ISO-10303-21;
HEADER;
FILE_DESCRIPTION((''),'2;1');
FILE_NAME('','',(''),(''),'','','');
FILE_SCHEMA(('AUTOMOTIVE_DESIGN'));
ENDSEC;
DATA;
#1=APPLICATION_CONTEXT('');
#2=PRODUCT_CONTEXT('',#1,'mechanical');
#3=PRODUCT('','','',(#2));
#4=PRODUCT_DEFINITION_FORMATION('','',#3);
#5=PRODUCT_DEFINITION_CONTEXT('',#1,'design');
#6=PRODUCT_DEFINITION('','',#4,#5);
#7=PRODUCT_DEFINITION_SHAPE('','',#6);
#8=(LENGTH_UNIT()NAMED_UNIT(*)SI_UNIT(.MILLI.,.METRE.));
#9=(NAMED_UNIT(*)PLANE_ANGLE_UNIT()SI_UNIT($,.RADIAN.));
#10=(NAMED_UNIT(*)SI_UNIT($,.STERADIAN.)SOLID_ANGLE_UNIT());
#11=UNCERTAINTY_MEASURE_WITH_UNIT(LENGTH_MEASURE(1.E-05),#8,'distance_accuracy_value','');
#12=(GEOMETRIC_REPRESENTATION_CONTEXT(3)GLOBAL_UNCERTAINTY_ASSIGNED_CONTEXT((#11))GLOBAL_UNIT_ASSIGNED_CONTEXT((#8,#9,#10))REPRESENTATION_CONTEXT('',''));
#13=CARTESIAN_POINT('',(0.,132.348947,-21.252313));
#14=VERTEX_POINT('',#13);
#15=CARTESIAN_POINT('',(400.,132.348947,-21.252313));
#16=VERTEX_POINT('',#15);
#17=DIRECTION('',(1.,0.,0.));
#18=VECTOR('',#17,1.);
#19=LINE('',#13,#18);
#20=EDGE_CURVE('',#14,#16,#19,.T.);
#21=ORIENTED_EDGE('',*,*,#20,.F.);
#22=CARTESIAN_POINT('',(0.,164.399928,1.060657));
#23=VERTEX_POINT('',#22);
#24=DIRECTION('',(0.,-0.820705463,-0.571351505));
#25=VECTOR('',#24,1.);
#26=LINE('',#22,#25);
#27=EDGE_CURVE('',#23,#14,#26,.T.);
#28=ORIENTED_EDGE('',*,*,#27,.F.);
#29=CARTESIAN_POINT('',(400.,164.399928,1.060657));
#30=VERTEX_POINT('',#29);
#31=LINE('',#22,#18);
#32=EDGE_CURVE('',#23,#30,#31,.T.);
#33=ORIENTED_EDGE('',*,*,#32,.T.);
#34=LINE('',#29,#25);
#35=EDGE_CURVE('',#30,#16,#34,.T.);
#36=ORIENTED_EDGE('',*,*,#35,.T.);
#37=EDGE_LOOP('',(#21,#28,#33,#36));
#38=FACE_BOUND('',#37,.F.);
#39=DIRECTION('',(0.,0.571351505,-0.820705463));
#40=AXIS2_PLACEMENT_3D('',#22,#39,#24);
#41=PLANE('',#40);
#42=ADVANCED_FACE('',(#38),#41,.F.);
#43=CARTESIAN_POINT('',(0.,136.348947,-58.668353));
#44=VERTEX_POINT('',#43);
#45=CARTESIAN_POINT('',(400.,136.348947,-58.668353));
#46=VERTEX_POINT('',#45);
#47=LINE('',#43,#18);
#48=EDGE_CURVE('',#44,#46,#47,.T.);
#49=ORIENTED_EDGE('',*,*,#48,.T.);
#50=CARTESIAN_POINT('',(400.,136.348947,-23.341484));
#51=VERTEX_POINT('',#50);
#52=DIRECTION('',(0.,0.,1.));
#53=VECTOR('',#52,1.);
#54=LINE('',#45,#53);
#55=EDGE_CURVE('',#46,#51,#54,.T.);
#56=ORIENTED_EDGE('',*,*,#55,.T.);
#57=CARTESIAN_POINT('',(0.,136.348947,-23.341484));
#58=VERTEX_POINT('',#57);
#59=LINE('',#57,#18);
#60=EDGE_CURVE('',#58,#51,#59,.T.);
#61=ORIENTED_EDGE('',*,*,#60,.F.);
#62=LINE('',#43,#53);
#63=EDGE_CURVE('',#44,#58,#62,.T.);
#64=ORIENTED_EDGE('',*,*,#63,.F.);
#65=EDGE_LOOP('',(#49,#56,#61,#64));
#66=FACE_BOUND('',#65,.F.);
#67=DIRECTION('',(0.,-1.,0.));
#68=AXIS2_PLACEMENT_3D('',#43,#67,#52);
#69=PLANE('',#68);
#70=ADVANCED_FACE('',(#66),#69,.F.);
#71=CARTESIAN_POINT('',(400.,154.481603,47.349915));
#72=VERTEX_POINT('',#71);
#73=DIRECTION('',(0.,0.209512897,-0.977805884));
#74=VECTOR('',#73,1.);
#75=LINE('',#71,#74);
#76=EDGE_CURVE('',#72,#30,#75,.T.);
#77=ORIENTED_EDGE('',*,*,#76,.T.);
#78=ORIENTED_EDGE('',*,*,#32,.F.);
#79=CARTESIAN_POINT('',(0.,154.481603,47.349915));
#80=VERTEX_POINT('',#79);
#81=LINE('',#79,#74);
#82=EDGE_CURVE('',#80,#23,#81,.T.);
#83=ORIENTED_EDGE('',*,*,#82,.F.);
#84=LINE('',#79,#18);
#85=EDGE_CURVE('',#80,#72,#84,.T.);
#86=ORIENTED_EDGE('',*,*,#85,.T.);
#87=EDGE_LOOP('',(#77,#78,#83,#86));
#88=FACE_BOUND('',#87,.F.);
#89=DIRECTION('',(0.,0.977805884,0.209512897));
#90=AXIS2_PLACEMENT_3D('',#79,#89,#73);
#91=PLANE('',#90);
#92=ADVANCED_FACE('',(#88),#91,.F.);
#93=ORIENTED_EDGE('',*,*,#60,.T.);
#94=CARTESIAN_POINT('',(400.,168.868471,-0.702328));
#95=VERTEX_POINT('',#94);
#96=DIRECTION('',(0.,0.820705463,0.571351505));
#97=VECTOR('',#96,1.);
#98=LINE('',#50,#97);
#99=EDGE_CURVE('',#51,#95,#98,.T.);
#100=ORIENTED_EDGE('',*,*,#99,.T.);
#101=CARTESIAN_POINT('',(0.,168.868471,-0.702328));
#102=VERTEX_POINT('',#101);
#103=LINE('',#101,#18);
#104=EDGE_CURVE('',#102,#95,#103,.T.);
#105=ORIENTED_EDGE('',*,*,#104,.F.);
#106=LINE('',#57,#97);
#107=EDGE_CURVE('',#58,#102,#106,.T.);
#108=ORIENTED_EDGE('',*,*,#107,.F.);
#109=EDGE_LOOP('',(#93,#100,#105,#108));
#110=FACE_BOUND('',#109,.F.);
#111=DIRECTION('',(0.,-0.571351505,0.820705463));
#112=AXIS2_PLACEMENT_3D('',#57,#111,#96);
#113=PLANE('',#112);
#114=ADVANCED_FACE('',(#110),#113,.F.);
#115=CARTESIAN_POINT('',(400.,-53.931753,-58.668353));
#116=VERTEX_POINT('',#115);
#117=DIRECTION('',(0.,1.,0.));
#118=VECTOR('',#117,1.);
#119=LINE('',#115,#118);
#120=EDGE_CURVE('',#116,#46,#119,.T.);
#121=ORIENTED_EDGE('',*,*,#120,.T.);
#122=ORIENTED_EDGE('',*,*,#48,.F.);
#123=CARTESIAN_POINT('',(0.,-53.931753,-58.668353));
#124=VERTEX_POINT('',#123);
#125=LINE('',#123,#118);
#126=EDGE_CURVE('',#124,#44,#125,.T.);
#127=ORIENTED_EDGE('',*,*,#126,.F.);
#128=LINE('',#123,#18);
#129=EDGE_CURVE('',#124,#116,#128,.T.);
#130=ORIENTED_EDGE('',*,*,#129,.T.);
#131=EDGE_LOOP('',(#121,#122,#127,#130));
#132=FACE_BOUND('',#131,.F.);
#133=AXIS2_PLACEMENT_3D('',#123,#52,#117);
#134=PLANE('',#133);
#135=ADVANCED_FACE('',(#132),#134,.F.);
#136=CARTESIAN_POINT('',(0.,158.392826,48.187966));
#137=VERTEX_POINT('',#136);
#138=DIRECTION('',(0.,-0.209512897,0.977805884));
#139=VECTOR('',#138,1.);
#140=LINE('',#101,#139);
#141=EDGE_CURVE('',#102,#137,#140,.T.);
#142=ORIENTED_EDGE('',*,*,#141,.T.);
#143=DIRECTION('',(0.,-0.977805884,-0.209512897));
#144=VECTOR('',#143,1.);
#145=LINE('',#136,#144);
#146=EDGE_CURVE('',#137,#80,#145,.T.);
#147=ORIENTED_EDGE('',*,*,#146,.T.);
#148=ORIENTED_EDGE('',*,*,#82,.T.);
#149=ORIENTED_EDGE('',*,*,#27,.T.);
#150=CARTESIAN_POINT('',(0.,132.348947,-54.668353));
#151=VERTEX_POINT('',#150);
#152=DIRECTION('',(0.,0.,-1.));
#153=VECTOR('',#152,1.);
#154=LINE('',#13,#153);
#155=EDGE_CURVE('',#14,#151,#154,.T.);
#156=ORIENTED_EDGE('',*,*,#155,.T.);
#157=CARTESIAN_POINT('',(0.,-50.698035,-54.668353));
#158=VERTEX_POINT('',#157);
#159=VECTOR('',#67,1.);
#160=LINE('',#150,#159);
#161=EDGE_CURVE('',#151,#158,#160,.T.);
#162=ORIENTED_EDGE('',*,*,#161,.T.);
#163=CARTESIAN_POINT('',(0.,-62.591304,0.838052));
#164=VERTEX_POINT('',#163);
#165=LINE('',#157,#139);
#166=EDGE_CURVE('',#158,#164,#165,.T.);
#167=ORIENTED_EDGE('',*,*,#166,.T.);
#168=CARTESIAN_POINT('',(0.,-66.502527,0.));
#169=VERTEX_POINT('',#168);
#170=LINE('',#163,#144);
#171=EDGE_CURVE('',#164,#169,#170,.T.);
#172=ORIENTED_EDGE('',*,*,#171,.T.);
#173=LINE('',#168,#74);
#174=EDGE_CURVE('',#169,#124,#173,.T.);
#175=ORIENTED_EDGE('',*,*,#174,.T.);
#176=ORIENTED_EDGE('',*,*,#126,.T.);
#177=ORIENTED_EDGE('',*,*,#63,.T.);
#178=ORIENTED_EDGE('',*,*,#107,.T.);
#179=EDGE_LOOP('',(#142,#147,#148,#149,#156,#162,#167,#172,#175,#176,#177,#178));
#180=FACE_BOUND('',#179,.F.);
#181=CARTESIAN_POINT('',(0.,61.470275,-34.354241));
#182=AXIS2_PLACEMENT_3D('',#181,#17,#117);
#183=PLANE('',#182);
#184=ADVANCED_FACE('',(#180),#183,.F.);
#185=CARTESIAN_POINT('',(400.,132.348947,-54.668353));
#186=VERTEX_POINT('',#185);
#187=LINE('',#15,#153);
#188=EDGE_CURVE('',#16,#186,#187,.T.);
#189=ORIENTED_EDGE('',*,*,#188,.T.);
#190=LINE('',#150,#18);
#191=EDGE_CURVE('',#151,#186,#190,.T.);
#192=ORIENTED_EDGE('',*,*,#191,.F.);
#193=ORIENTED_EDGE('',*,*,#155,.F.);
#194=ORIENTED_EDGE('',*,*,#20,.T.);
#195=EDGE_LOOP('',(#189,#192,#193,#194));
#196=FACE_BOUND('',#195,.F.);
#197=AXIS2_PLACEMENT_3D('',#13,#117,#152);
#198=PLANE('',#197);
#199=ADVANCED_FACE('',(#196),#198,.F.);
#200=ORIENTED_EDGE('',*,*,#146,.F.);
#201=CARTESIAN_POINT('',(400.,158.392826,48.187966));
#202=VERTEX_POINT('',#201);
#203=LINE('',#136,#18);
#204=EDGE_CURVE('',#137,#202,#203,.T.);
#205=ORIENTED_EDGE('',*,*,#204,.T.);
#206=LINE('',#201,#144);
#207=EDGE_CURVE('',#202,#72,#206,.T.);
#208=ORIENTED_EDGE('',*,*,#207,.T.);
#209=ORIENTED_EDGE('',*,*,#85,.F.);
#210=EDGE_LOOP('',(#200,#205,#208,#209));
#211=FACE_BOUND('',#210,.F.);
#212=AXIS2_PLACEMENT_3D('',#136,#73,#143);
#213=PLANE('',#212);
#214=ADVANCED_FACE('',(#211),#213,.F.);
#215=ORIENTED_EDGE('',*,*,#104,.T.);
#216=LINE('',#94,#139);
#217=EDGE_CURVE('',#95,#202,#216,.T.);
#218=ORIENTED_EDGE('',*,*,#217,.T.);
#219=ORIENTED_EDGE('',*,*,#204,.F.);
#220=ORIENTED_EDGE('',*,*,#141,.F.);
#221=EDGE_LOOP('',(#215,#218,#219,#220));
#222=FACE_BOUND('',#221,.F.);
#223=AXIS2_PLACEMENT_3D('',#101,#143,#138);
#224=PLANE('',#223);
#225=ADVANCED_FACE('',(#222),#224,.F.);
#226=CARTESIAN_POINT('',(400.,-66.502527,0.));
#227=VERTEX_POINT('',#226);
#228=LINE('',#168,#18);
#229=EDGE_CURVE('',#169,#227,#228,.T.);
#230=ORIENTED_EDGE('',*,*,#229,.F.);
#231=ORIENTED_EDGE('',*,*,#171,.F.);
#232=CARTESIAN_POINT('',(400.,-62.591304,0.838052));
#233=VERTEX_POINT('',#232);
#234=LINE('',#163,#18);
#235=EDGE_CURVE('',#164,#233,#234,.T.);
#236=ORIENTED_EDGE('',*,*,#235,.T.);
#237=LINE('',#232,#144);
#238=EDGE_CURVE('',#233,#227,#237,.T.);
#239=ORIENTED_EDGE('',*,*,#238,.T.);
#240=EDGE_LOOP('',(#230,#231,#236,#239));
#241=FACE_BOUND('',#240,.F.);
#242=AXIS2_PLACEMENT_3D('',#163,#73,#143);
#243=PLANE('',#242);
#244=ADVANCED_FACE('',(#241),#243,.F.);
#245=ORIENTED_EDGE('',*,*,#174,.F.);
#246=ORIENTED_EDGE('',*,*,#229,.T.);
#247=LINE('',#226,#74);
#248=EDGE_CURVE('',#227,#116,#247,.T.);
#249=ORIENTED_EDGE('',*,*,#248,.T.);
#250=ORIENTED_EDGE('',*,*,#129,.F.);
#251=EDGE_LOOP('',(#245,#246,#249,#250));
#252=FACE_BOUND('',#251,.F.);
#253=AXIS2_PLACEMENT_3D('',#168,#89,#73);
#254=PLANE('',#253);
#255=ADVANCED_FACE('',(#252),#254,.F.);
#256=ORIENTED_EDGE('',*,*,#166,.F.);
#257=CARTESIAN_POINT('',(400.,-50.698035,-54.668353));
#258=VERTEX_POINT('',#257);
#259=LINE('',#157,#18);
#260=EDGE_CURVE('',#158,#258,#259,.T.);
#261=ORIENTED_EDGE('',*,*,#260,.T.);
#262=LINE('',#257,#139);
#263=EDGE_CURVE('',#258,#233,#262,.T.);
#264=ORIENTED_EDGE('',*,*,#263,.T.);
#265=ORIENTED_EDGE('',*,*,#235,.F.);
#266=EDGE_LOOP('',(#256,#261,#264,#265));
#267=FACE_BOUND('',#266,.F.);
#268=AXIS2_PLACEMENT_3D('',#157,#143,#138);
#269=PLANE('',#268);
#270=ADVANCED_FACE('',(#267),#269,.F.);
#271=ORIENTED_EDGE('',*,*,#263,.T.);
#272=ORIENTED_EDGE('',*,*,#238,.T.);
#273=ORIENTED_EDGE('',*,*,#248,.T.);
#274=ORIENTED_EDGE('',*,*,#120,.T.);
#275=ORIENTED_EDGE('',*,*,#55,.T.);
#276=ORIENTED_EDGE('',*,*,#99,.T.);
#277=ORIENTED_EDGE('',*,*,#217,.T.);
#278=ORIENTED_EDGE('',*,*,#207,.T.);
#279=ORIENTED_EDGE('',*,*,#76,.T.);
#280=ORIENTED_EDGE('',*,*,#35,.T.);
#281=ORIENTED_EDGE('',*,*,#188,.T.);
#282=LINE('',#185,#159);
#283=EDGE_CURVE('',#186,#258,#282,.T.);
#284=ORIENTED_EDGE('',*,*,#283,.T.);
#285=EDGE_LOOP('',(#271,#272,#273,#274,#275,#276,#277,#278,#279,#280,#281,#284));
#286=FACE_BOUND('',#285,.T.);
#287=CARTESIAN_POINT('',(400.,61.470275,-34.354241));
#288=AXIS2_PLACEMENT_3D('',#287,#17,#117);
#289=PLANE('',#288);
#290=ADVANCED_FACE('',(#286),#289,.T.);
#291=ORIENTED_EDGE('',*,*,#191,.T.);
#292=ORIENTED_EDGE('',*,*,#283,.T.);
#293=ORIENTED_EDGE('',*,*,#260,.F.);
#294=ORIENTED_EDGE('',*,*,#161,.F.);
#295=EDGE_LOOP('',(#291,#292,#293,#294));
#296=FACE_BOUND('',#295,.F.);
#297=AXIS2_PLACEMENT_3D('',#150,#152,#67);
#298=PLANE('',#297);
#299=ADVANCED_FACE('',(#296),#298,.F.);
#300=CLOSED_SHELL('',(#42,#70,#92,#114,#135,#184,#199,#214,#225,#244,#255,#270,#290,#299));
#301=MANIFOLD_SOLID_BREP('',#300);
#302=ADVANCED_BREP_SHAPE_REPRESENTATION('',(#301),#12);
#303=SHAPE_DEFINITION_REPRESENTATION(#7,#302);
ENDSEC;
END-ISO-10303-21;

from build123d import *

# Parameters (mm, degrees)
F1_DEPTH = 400


# Not quite as in the source:
# - a feature names something its author has since deleted; it is built from what else it names


with BuildPart() as f1:
    # F0 (on Right) → F1 (new body)
    with BuildSketch(Plane.YZ):
        Polygon((-62.5913035921, 0.8380515879), (-66.5025271265, 0), (-53.9317533084, -58.668353016), (136.3489470076, -58.668353016), (136.3489470076, -23.3414838178), (168.86847095, -0.7023278775), (158.3928261017, 48.1879663026), (154.4816025673, 47.3499147147), (164.3999275858, 1.060656636), (132.3489470076, -21.2523129091), (132.3489470076, -54.668353016), (-50.6980353843, -54.668353016), align=None)
    extrude(amount=F1_DEPTH)


solid = f1.part
